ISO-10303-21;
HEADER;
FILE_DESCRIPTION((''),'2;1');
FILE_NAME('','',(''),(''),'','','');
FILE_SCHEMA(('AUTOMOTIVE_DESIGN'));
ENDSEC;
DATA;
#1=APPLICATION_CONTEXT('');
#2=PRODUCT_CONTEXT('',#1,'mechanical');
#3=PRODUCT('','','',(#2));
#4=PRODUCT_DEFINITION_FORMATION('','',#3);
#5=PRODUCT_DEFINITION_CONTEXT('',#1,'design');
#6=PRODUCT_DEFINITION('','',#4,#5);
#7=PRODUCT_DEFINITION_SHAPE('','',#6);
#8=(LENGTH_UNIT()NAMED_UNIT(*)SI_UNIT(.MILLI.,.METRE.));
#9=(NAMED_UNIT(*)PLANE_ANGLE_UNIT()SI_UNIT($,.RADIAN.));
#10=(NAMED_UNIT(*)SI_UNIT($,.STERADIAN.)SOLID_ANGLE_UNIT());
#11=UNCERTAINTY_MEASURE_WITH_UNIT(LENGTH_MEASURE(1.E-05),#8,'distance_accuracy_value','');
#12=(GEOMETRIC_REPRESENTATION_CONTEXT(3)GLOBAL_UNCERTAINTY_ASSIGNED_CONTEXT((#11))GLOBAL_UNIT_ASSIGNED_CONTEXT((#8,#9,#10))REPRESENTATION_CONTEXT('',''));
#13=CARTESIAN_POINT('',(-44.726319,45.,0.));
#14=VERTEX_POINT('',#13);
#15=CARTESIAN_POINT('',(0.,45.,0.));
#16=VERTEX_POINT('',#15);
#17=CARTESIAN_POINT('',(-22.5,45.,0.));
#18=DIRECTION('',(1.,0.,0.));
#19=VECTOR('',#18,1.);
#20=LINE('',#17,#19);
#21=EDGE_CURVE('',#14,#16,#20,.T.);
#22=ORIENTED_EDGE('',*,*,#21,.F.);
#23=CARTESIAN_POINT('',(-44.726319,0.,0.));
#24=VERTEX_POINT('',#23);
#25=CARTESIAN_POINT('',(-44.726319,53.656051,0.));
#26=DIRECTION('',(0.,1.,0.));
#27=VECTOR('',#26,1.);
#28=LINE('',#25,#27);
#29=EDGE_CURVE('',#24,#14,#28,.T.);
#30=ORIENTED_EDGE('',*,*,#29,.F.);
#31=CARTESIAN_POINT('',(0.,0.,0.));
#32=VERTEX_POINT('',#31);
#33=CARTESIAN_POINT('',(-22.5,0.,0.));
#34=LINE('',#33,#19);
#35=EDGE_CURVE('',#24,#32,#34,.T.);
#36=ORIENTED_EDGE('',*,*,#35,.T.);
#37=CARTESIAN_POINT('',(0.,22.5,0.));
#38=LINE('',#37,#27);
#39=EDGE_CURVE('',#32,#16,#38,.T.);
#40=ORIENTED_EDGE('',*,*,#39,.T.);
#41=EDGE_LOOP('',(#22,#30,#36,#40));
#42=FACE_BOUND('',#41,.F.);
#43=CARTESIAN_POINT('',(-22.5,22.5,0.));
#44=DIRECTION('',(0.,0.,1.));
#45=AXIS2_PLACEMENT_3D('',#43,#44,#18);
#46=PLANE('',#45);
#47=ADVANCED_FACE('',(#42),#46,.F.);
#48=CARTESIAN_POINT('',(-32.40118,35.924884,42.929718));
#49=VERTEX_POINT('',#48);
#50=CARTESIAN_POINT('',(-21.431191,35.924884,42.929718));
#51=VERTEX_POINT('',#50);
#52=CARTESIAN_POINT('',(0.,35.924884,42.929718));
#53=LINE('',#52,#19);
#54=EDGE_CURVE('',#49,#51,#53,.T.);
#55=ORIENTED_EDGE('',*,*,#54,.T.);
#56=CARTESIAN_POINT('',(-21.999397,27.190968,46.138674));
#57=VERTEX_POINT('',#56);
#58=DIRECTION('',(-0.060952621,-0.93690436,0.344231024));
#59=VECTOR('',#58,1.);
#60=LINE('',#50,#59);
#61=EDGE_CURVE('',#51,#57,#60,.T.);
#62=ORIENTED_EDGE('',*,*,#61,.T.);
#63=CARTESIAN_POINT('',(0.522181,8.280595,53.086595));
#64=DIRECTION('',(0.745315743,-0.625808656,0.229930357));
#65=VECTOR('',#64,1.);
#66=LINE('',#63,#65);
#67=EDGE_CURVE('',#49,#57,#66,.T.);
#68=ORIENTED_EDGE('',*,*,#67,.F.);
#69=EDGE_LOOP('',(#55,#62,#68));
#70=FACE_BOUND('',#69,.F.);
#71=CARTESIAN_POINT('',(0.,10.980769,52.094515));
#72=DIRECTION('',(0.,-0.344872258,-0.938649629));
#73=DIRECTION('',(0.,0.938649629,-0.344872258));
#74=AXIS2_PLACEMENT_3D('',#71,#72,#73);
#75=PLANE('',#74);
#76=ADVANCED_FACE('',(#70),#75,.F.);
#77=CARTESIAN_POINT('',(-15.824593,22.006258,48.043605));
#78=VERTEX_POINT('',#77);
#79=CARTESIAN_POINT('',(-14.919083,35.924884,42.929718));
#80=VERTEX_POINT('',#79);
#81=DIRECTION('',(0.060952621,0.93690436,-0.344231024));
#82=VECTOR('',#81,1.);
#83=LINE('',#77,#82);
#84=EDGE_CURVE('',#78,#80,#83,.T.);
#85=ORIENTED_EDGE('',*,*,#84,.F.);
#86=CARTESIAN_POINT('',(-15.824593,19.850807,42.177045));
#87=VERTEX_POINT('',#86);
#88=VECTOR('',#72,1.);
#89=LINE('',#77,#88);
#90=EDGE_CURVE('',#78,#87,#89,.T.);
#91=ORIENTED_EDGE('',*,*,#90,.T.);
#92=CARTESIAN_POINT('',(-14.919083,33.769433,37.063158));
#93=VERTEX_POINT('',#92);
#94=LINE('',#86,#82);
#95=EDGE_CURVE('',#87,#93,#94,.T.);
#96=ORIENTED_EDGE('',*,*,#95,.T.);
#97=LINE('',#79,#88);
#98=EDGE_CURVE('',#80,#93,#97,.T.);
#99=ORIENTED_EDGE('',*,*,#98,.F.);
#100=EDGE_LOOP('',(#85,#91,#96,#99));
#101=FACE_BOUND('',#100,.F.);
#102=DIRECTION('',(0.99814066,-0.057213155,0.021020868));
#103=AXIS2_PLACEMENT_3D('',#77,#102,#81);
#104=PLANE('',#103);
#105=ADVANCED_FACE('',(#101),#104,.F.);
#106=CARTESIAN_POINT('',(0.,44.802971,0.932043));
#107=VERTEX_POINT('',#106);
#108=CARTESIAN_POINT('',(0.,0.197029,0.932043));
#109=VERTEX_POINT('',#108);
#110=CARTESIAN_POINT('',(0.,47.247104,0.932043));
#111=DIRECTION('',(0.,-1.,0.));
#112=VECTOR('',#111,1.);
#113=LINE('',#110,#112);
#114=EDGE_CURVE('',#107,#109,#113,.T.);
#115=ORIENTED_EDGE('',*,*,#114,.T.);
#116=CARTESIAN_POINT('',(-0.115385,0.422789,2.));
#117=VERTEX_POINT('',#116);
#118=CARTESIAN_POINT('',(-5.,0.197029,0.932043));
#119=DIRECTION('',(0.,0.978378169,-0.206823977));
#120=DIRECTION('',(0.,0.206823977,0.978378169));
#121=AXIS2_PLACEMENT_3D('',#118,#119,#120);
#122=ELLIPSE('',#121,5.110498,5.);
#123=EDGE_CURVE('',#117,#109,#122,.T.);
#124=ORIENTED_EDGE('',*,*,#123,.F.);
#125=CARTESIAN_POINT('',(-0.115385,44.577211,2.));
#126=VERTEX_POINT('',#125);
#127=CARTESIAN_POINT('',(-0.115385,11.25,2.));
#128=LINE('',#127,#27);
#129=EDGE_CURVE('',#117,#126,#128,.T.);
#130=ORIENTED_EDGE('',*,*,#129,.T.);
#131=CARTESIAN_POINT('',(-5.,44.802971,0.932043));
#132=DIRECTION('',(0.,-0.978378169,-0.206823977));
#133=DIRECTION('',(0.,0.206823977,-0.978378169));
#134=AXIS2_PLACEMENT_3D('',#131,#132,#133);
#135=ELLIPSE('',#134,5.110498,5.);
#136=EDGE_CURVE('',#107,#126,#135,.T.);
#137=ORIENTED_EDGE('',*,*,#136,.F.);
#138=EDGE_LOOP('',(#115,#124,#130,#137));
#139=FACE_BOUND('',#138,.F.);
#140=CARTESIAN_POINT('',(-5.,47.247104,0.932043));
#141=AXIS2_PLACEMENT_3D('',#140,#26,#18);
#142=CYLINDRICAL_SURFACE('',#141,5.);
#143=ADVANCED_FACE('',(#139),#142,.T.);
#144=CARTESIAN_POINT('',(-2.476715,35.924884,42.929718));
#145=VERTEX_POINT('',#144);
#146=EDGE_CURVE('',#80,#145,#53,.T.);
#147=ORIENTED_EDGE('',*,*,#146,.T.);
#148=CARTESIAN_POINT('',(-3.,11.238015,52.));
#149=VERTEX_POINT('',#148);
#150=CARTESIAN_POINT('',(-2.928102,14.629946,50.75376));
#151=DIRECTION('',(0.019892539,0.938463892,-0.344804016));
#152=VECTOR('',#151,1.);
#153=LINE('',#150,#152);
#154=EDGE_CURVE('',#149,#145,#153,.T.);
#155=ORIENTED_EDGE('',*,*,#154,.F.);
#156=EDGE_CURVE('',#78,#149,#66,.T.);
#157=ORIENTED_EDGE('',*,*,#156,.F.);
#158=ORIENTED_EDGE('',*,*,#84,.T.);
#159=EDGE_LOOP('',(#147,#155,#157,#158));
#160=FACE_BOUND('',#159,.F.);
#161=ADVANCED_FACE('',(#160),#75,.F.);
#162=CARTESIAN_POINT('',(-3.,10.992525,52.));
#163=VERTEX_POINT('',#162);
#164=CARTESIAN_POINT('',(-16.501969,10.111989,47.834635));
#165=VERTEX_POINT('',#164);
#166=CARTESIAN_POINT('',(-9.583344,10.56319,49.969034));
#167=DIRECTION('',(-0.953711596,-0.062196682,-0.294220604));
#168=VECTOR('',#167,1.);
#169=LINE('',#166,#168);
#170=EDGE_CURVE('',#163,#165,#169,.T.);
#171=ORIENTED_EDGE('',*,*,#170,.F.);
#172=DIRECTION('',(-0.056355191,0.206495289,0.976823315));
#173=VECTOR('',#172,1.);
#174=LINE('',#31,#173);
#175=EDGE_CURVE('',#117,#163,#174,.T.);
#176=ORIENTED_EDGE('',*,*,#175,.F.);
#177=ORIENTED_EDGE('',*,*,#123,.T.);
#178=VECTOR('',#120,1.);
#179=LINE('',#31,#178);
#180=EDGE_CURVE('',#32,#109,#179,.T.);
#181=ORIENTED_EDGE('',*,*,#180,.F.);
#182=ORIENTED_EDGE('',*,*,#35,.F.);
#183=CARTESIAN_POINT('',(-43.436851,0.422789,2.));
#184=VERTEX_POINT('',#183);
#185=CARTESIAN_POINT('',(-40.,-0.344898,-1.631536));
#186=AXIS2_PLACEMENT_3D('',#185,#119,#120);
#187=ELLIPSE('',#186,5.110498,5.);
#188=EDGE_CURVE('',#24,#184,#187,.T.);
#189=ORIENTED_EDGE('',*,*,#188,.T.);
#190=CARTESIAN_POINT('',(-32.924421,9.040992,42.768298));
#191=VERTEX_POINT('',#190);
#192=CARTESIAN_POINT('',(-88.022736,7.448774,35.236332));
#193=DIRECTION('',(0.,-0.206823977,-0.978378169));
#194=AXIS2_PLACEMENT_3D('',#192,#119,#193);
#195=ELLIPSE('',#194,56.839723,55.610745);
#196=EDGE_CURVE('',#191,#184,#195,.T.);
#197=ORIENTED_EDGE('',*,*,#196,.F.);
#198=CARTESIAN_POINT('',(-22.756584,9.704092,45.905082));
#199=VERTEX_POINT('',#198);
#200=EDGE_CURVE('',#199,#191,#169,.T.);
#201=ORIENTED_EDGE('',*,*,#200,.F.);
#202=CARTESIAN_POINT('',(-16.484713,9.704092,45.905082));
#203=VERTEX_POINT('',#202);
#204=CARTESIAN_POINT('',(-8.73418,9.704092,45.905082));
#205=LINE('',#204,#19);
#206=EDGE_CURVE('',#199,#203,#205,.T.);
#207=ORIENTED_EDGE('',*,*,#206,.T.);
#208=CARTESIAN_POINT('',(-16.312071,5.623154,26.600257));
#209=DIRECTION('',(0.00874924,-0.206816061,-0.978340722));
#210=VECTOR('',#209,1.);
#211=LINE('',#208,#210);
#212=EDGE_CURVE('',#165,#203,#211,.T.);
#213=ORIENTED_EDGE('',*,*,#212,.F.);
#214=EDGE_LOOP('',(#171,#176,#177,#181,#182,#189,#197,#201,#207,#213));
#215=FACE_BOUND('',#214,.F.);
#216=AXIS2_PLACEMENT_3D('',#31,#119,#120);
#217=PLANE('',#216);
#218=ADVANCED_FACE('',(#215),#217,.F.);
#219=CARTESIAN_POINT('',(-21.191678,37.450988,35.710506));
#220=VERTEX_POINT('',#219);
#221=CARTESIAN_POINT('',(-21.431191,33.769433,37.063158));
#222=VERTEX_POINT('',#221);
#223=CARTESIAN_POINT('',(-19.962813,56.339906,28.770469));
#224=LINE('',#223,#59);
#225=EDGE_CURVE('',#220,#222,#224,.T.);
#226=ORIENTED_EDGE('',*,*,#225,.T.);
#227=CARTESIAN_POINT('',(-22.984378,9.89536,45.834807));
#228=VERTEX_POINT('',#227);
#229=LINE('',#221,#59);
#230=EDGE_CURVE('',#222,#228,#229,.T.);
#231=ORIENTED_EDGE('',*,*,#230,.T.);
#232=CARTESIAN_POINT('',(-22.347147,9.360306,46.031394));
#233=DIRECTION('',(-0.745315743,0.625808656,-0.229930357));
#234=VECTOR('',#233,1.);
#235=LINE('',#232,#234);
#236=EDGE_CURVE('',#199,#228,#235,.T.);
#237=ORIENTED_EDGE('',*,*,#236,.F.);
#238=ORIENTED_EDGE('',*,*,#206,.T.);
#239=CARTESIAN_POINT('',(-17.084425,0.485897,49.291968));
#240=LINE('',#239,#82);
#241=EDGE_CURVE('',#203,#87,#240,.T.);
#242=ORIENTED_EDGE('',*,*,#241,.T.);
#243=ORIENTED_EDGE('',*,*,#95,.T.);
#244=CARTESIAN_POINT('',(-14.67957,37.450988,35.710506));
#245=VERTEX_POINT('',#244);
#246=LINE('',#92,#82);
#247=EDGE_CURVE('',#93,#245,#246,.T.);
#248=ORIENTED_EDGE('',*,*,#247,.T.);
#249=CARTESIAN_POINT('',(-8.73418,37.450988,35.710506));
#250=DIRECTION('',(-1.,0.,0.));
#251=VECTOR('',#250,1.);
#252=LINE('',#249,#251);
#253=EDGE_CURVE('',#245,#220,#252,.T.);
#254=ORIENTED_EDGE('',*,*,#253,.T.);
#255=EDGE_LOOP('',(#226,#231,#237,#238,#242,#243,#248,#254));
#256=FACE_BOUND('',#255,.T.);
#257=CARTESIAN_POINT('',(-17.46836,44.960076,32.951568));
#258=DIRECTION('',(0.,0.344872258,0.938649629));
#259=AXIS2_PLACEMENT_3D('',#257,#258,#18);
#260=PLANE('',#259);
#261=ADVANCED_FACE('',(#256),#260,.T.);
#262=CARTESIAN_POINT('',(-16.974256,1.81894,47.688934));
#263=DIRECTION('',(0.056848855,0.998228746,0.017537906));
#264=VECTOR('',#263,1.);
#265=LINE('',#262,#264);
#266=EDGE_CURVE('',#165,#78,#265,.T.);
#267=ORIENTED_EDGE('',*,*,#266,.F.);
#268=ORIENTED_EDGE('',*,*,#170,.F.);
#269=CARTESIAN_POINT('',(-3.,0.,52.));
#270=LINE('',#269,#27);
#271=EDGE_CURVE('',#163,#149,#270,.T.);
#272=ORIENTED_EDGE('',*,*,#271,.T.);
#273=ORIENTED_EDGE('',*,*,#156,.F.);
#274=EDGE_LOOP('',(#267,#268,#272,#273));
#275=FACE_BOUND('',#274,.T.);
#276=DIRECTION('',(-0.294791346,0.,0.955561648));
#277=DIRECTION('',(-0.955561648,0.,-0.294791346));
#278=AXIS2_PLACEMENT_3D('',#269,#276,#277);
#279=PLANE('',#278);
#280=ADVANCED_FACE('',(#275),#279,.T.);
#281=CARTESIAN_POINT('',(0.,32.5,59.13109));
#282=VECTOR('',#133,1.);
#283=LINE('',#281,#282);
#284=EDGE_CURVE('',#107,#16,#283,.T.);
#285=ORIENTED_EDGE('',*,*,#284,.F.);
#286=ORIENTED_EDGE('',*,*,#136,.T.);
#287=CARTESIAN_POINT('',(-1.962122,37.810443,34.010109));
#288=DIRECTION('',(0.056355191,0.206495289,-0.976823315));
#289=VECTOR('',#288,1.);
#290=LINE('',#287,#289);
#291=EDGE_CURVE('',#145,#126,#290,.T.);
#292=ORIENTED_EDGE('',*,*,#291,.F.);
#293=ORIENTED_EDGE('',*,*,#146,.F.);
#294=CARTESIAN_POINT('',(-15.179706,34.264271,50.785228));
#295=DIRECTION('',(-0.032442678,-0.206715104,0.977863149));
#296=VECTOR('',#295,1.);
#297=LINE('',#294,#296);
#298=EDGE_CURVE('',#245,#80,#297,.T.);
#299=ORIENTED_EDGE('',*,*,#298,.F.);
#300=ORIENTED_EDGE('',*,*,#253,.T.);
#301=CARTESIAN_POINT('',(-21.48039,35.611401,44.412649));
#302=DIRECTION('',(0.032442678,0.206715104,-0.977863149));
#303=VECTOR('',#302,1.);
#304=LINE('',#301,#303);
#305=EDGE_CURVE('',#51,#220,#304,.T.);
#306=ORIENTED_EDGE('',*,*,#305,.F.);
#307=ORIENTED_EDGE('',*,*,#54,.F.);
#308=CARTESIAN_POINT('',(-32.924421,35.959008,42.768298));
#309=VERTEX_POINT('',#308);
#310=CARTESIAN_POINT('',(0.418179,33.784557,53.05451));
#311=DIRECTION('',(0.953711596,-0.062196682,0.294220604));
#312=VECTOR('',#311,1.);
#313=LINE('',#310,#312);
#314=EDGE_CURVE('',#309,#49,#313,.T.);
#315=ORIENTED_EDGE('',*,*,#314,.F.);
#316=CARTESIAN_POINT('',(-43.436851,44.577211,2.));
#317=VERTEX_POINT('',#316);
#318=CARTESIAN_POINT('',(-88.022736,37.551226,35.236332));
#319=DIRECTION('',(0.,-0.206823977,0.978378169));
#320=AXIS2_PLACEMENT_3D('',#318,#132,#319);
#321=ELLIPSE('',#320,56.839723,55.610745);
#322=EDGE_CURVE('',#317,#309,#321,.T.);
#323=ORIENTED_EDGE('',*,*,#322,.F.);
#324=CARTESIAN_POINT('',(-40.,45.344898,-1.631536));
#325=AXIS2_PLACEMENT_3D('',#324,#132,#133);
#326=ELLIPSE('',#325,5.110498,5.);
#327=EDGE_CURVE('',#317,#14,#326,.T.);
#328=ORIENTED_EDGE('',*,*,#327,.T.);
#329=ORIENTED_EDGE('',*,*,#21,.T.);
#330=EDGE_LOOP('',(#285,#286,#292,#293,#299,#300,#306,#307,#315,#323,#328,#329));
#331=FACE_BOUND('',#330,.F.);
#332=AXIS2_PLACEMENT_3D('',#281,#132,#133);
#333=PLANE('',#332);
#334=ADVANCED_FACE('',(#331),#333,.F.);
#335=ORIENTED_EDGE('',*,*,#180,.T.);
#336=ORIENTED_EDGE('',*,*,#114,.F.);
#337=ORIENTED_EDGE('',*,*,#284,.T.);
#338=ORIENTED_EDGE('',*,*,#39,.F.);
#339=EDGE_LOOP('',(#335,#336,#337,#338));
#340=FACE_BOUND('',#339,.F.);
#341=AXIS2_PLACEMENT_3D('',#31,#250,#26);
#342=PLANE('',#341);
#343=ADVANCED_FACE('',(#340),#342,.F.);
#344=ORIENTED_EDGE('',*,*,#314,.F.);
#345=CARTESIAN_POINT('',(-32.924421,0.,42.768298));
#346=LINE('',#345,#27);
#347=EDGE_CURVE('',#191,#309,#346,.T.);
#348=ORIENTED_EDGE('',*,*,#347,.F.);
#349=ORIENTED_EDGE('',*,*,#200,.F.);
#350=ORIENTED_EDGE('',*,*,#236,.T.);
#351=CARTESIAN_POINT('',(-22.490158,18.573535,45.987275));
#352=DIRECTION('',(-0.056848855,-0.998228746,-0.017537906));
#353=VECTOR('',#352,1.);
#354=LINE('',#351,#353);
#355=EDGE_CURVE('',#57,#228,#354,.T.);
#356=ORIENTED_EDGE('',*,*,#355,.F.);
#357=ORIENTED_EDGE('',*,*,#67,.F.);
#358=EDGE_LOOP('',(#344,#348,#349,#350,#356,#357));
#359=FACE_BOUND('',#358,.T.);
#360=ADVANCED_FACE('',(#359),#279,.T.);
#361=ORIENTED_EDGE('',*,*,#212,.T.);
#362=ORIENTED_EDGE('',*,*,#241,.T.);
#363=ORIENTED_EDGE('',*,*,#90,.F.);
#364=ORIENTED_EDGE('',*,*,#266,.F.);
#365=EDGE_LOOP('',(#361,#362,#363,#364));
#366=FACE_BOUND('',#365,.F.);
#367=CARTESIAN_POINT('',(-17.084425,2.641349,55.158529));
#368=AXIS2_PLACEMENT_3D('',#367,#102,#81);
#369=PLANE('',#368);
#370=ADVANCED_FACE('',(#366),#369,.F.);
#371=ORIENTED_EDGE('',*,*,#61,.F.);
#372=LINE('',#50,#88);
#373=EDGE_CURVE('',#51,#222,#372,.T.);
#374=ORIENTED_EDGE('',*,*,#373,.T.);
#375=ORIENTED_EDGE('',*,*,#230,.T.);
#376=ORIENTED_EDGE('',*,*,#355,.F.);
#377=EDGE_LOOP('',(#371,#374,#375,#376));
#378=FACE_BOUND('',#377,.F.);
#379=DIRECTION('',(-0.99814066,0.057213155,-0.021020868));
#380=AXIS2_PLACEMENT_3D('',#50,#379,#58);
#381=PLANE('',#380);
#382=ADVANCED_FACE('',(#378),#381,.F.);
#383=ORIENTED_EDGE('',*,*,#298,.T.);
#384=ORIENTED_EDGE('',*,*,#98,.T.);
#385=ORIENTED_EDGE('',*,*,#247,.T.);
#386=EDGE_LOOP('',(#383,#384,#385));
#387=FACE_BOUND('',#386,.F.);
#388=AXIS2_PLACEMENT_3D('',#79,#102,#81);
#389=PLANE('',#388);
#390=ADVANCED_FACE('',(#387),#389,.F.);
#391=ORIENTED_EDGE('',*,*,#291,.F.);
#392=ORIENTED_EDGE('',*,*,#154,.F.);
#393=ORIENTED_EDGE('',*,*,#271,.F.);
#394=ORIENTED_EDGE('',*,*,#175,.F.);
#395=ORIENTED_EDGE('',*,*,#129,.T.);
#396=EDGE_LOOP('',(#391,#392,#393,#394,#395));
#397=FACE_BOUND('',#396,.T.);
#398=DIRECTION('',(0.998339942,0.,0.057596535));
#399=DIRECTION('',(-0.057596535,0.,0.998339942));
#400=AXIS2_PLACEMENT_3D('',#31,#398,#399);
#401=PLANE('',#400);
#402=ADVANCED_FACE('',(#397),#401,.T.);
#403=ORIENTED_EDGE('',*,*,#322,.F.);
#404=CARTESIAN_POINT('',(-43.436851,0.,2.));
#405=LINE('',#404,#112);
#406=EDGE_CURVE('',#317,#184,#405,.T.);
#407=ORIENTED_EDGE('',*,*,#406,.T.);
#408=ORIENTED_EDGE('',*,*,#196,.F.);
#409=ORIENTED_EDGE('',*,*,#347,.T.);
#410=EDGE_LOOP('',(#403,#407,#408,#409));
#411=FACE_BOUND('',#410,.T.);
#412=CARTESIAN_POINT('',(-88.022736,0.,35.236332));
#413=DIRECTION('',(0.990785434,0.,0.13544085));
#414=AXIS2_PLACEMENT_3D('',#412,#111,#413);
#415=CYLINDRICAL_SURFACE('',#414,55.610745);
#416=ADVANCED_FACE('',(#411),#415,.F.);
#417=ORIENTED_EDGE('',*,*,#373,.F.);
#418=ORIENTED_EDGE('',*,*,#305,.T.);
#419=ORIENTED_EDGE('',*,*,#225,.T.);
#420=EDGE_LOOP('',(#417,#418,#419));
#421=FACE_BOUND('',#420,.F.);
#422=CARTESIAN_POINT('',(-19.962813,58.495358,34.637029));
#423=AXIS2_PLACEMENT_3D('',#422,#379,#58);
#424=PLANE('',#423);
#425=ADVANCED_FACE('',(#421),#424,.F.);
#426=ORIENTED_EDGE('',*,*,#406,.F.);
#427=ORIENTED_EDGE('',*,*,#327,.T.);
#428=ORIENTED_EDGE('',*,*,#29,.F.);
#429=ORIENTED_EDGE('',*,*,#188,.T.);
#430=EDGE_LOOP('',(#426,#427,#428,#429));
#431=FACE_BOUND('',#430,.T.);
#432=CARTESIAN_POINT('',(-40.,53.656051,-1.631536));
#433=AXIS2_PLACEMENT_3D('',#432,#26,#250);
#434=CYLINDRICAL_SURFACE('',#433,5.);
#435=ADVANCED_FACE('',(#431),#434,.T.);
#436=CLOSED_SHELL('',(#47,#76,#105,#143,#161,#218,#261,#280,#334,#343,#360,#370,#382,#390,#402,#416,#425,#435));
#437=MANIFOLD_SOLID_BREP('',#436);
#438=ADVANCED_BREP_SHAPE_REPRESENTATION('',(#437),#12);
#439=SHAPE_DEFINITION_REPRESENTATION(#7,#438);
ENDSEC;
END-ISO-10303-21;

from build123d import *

# Parameters (mm, degrees)
F0_W         = 45
F0_H         = 45
F1_DEPTH     = 2
F3_DEPTH     = 45
F5_DEPTH     = 50
F7_DEPTH     = 52.4
F9_DEPTH     = 6.25
F10_T1_DEPTH = 62.3121019707
F11_T1_DEPTH = 49.4942070429


# Not quite as in the source:
# - a fillet or chamfer that OpenCascade refuses, or shapes differently, is made with other operations: its cross-section is extruded or revolved along the edge and cut away or added


with BuildPart() as f1:
    # F0 (on Top) → F1 (new body)
    with BuildSketch(Plane.XY):
        with Locations((-22.5, 22.5)):
            Rectangle(F0_W, F0_H)
    extrude(amount=F1_DEPTH)

    # F2 (on Front) → F3 (join)
    with BuildSketch(Plane.XZ):
        with BuildLine():
            Line((-45, 0), (0, 0))
            Line((0, 0), (-3, 52))
            Line((-3, 52), (-32.9244207251, 42.7682981249))
            ThreePointArc((-32.9244207251, 42.7682981249), (-34.5043559539, 20.1254790506), (-45, 0))
        make_face()
    extrude(amount=-F3_DEPTH)

    # F4 (on Right) → F5 (cut)
    with BuildSketch(Plane.YZ):
        Polygon((0, 0), (12.5, 59.1310895979), (0, 59.1310895979), align=None)
        Polygon((45, 0), (45, 59.1310895979), (32.5, 59.1310895979), align=None)
    extrude(amount=-F5_DEPTH, mode=Mode.SUBTRACT)

    # F6 (on Right) → F7 (cut)
    with BuildSketch(Plane.YZ):
        Polygon((37.7679802477, 54.4090420008), (10.9807690606, 52.094515413), (37.7679802477, 42.2525405884), align=None)
    extrude(amount=-F7_DEPTH, mode=Mode.SUBTRACT)

    # F8 (on face) → F9 (cut)
    with BuildSketch(Plane(origin=(0, 18.1697536282, 49.4531876304), x_dir=(1, 0, 0), z_dir=(0, 0.3448722583, 0.9386496287))):
        Polygon((-14.9190827221, 18.9156103945), (-13.4748989156, 42.5651032579), (-19.9628132083, 42.9612952953), (-21.4311909427, 18.9156103945), align=None)
        Polygon((-15.8245932316, 4.0872594346), (-14.9190827221, 18.9156103945), (-21.4311909427, 18.9156103945), (-21.9993973802, 9.6108432114), align=None)
        Polygon((-17.0844251269, -16.5433453977), (-15.8245932316, 4.0872594346), (-21.9993973802, 9.6108432114), (-23.5723394196, -16.1471533603), align=None)
    extrude(amount=-F9_DEPTH, mode=Mode.SUBTRACT)

    # F10: fillet of radius 5 on 1 edges, made by hand

    # F10_s2 → F10_t1 (cut)
    with BuildSketch(Plane.XZ.offset(-53.6560509853)):
        with BuildLine():
            ThreePointArc((-45, -1.6315361684), (-44.5926166392, 0.3452977662), (-43.436851038, 2))
            Line((-43.436851038, 2), (-45, 2))
            Line((-45, 2), (-45, -1.6315361684))
        make_face()
    extrude(amount=F10_T1_DEPTH, mode=Mode.SUBTRACT)

    # F11: fillet of radius 5 on 1 edges, made by hand

    # F11_s2 → F11_t1 (cut)
    with BuildSketch(Plane.XZ.offset(-47.2471035215)):
        with BuildLine():
            ThreePointArc((0, 0.9320428172), (-0.0289298475, 1.4691289727), (-0.1153846154, 2))
            Line((-0.1153846154, 2), (0, 2))
            Line((0, 2), (0, 0.9320428172))
        make_face()
    extrude(amount=F11_T1_DEPTH, mode=Mode.SUBTRACT)


solid = f1.part
